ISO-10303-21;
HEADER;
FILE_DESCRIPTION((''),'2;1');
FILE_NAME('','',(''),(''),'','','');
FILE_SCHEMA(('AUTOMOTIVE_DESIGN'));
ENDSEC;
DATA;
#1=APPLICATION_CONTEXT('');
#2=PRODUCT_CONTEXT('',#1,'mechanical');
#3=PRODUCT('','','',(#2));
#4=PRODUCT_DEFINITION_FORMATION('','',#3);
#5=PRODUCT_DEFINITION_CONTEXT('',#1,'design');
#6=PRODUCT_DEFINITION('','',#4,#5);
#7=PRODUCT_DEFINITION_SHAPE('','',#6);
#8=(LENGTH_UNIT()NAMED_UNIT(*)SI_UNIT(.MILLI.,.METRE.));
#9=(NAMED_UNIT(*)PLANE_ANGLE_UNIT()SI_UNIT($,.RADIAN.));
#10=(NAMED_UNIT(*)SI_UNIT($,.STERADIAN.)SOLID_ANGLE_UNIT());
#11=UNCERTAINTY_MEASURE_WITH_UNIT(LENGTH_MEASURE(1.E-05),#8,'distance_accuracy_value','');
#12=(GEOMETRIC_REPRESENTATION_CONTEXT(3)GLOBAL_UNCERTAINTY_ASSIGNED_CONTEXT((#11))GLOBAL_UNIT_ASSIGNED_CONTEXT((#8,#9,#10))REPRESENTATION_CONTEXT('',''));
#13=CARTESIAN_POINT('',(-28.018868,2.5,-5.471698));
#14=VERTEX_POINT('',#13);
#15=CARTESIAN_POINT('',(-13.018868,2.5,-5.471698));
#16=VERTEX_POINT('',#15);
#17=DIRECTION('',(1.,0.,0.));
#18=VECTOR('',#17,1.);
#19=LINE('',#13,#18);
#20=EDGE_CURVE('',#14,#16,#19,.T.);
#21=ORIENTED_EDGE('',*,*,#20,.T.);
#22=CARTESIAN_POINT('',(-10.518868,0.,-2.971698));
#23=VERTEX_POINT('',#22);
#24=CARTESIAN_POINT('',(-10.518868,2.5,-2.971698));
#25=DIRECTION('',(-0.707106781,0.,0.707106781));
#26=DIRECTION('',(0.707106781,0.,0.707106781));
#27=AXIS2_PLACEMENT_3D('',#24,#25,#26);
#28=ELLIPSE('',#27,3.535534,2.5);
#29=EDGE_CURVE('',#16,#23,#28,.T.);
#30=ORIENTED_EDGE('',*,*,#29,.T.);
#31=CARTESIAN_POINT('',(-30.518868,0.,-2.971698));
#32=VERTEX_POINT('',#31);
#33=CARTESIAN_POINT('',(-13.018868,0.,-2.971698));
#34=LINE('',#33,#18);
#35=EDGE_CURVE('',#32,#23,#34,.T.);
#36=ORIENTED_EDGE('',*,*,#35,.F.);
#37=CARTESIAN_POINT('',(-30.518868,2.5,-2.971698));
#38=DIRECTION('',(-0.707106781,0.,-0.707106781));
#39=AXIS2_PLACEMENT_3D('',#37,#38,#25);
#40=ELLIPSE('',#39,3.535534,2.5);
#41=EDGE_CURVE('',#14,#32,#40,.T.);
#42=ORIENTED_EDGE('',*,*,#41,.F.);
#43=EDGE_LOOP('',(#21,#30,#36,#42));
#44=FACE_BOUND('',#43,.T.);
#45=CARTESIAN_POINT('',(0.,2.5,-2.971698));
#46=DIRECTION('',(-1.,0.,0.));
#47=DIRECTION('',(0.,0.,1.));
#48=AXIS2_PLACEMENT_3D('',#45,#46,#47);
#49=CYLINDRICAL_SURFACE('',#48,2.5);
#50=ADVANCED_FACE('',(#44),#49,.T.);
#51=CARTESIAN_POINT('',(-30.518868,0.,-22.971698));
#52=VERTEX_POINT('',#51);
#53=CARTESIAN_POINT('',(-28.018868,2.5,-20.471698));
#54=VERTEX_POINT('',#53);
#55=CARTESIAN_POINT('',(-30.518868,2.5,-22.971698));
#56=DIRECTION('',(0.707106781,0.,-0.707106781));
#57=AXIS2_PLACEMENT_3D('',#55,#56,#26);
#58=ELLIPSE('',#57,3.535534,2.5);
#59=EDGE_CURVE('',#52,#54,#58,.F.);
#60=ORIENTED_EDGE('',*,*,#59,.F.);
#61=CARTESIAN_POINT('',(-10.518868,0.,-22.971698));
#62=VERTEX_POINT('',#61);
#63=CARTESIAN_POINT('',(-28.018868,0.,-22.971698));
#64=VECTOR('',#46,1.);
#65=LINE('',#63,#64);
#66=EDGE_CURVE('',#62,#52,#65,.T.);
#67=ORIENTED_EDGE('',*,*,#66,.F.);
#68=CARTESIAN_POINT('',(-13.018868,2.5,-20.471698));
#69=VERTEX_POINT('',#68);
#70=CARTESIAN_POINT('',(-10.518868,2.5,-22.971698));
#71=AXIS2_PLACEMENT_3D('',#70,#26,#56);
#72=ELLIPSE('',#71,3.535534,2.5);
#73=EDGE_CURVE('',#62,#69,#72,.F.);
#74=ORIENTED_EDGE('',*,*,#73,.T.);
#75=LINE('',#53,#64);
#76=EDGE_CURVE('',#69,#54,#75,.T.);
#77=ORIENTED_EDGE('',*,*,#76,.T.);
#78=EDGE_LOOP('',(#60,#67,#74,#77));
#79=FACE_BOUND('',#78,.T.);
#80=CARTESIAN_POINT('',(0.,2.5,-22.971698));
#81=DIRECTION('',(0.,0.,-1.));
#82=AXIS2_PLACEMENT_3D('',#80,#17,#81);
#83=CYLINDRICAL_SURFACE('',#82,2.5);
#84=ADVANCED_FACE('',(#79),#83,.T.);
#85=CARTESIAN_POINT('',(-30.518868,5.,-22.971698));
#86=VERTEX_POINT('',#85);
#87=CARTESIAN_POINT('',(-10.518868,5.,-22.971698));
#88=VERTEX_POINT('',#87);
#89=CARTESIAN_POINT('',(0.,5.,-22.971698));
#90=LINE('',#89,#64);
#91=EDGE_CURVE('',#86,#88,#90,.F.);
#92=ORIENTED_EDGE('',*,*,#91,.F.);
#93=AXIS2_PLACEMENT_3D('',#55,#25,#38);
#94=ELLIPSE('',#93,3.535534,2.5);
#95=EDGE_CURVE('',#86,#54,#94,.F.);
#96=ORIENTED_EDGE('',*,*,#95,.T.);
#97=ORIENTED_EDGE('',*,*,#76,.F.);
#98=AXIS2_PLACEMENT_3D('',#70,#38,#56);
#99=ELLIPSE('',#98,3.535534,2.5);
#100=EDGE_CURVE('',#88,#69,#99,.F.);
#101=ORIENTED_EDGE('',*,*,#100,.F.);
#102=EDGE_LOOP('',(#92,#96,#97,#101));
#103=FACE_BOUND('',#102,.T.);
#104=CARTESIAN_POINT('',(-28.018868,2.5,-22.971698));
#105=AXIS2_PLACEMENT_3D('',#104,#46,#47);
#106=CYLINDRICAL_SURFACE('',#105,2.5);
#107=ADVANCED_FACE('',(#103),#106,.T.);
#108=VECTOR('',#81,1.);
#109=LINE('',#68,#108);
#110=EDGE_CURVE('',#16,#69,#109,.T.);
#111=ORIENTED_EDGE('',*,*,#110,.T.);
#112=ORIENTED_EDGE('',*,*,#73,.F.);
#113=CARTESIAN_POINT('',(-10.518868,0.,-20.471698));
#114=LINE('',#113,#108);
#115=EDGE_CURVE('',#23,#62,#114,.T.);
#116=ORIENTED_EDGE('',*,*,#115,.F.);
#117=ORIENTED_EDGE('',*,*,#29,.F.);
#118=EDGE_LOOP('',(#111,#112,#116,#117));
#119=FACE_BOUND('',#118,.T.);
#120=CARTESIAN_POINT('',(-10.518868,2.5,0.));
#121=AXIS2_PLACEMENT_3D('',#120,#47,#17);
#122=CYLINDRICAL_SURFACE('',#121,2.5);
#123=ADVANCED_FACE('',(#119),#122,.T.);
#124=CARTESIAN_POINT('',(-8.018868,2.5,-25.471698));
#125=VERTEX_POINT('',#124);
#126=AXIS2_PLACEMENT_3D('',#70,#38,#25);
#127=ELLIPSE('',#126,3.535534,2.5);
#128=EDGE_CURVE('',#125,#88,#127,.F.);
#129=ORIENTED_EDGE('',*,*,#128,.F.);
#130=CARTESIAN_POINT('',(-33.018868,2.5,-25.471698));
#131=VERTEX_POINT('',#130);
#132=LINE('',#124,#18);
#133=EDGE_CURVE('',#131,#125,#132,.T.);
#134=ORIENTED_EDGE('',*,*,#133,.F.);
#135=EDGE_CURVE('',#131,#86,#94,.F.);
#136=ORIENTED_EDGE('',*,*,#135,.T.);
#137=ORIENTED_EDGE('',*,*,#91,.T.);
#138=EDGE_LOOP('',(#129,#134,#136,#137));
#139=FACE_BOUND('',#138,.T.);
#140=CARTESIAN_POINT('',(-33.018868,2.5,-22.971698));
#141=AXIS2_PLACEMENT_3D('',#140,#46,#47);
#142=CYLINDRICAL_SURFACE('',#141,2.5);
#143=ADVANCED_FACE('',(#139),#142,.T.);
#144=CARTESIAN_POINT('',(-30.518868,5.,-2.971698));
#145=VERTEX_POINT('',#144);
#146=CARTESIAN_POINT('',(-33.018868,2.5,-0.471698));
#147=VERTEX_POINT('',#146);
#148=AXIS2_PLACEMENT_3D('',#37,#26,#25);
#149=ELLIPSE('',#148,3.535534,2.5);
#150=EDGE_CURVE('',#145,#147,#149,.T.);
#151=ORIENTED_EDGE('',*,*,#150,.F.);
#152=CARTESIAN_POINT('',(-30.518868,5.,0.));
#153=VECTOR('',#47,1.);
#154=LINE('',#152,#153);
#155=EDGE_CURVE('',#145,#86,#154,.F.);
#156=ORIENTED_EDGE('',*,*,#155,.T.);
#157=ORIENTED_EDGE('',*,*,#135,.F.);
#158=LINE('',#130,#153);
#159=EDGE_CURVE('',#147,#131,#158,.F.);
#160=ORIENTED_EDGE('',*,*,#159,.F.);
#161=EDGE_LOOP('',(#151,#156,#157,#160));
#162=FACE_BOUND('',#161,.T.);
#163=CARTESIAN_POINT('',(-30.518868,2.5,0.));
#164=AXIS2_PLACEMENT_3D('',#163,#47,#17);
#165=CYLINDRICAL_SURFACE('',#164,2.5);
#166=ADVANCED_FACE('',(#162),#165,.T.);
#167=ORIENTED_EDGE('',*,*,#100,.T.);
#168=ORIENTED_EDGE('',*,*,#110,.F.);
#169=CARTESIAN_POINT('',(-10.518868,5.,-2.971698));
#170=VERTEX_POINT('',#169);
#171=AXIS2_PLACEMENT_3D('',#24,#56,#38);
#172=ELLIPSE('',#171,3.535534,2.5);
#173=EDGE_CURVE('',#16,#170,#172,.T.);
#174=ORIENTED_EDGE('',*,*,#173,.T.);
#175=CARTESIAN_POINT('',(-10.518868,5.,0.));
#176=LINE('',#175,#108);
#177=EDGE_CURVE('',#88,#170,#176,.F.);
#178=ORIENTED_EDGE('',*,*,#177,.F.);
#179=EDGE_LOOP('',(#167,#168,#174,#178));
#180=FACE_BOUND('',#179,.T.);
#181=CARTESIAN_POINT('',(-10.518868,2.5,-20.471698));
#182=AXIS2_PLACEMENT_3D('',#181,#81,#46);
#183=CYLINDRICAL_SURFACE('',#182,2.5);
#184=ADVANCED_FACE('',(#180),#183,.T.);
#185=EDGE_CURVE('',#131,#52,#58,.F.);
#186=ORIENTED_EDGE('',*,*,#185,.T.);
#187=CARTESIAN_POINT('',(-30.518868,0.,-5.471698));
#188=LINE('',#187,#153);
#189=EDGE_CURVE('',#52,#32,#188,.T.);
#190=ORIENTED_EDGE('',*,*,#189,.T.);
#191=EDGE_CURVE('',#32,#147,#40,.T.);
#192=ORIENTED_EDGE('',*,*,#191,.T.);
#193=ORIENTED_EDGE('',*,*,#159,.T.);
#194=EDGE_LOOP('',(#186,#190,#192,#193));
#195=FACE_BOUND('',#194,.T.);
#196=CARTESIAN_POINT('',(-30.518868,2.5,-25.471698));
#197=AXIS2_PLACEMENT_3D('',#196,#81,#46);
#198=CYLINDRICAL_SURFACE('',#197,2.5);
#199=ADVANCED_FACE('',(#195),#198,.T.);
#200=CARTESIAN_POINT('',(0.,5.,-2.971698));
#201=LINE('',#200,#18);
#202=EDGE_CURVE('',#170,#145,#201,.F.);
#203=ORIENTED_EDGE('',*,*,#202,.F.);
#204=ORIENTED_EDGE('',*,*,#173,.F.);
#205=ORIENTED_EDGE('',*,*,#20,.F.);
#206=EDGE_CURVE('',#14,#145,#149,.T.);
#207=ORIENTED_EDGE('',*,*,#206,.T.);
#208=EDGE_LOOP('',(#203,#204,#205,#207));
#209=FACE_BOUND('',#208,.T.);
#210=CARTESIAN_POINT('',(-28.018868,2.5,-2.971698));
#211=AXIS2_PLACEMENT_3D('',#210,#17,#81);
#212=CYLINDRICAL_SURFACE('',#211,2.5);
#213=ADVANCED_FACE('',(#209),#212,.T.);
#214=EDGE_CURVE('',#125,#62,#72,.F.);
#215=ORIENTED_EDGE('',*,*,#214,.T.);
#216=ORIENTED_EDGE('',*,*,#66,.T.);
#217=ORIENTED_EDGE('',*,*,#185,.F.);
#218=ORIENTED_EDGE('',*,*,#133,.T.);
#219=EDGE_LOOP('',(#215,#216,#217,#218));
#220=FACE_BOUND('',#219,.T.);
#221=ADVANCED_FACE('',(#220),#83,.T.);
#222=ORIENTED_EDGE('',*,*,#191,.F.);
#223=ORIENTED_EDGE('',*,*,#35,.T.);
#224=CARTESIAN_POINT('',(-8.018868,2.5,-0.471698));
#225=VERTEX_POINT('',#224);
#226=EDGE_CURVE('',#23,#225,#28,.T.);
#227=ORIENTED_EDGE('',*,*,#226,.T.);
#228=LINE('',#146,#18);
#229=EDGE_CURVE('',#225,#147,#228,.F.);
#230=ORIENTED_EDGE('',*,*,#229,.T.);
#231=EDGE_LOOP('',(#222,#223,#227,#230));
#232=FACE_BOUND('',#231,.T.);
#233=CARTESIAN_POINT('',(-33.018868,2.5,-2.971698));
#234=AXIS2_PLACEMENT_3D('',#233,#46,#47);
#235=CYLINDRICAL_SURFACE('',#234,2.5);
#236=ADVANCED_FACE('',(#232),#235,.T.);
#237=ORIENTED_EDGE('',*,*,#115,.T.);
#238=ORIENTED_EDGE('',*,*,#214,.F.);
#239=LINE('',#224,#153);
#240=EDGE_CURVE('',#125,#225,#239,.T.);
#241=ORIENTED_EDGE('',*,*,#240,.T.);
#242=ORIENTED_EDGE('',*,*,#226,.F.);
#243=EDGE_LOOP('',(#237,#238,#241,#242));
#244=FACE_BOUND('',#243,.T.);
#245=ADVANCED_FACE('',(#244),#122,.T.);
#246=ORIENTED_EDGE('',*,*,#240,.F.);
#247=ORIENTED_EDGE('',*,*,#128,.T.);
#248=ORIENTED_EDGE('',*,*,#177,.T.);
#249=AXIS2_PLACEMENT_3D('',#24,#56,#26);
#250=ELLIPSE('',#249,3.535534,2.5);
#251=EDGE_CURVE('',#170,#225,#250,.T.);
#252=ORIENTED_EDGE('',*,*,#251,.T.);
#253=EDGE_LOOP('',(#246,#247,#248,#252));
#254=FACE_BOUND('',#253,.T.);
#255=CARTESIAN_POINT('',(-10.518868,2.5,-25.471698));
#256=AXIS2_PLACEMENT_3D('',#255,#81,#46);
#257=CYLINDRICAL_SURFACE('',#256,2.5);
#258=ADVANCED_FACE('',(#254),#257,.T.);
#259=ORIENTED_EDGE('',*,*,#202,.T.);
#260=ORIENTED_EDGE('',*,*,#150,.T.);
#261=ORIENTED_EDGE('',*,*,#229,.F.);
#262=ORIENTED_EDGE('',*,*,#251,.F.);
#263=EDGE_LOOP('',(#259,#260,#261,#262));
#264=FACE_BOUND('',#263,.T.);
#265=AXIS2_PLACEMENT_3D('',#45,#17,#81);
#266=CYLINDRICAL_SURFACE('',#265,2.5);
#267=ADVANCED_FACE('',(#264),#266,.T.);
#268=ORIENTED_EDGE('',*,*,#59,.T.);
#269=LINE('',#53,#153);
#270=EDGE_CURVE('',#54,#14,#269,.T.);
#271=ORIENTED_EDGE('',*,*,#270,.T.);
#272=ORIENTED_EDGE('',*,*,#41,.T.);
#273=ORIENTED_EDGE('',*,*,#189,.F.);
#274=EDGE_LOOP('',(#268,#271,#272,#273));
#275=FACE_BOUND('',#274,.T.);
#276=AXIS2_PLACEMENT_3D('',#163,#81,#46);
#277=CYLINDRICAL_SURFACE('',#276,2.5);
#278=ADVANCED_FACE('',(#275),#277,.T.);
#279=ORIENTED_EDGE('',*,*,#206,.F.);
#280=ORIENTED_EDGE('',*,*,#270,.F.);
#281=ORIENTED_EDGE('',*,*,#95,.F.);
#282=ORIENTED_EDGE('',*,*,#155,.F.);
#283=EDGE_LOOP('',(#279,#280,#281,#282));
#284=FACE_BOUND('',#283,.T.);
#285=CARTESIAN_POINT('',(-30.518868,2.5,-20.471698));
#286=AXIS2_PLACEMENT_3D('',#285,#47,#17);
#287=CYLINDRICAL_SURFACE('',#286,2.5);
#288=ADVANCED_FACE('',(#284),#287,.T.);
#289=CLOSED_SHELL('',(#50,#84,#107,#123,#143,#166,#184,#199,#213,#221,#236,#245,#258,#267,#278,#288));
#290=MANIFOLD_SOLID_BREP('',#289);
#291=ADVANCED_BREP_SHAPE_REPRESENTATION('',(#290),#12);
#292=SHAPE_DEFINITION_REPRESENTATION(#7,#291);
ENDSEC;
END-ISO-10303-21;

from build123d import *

# Parameters (mm, degrees)
SKETCH1_W           = 25
SKETCH1_H           = 25
BOSS_EXTRUDE1_DEPTH = 5
SKETCH2_W           = 15
SKETCH2_H           = 15
CUT_EXTRUDE1_DEPTH  = 5
FILLET1_R           = 2.5
FILLET2_R           = 2.5


with BuildPart() as part:
    # Sketch1 → Boss-Extrude1 (new body)
    with BuildSketch(Plane(origin=(0, 0, 0), x_dir=(1, 0, 0), z_dir=(0, 1, 0))):
        with Locations((-20.518867925, 12.971698113)):
            Rectangle(SKETCH1_W, SKETCH1_H)
    extrude(amount=BOSS_EXTRUDE1_DEPTH)

    # Sketch2 → Cut-Extrude1 (cut)
    with BuildSketch(Plane(origin=(0, 5, 0), x_dir=(1, 0, 0), z_dir=(0, 1, 0))):
        with Locations((-20.518867925, 12.971698113)):
            Rectangle(SKETCH2_W, SKETCH2_H)
    extrude(amount=-CUT_EXTRUDE1_DEPTH, mode=Mode.SUBTRACT)

    # Fillet1
    fillet1_edges = [part.edges().sort_by_distance(p)[0] for p in [
        (-20.518867925, 5, -0.471698113),
        (-33.018867925, 5, -12.971698113),
        (-28.018867925, 5, -12.971698113),
        (-20.518867925, 5, -5.471698113),
        (-13.018867925, 5, -12.971698113),
        (-20.518867925, 5, -20.471698113),
        (-20.518867925, 5, -25.471698113),
        (-8.018867925, 5, -12.971698113),
    ]]
    fillet(fillet1_edges, radius=FILLET1_R - 0.0001)  # a hair under: the kernel refuses the full size

    # Fillet2
    fillet2_edges = [part.edges().sort_by_distance(p)[0] for p in [
        (-33.018867925, 0, -12.971698113),
        (-20.518867925, 0, -0.471698113),
        (-8.018867925, 0, -12.971698113),
        (-20.518867925, 0, -25.471698113),
        (-20.518867925, 0, -20.471698113),
        (-13.018867925, 0, -12.971698113),
        (-20.518867925, 0, -5.471698113),
        (-28.018867925, 0, -12.971698113),
    ]]
    fillet(fillet2_edges, radius=FILLET2_R - 0.0001)  # a hair under: the kernel refuses the full size


solid = part.part
